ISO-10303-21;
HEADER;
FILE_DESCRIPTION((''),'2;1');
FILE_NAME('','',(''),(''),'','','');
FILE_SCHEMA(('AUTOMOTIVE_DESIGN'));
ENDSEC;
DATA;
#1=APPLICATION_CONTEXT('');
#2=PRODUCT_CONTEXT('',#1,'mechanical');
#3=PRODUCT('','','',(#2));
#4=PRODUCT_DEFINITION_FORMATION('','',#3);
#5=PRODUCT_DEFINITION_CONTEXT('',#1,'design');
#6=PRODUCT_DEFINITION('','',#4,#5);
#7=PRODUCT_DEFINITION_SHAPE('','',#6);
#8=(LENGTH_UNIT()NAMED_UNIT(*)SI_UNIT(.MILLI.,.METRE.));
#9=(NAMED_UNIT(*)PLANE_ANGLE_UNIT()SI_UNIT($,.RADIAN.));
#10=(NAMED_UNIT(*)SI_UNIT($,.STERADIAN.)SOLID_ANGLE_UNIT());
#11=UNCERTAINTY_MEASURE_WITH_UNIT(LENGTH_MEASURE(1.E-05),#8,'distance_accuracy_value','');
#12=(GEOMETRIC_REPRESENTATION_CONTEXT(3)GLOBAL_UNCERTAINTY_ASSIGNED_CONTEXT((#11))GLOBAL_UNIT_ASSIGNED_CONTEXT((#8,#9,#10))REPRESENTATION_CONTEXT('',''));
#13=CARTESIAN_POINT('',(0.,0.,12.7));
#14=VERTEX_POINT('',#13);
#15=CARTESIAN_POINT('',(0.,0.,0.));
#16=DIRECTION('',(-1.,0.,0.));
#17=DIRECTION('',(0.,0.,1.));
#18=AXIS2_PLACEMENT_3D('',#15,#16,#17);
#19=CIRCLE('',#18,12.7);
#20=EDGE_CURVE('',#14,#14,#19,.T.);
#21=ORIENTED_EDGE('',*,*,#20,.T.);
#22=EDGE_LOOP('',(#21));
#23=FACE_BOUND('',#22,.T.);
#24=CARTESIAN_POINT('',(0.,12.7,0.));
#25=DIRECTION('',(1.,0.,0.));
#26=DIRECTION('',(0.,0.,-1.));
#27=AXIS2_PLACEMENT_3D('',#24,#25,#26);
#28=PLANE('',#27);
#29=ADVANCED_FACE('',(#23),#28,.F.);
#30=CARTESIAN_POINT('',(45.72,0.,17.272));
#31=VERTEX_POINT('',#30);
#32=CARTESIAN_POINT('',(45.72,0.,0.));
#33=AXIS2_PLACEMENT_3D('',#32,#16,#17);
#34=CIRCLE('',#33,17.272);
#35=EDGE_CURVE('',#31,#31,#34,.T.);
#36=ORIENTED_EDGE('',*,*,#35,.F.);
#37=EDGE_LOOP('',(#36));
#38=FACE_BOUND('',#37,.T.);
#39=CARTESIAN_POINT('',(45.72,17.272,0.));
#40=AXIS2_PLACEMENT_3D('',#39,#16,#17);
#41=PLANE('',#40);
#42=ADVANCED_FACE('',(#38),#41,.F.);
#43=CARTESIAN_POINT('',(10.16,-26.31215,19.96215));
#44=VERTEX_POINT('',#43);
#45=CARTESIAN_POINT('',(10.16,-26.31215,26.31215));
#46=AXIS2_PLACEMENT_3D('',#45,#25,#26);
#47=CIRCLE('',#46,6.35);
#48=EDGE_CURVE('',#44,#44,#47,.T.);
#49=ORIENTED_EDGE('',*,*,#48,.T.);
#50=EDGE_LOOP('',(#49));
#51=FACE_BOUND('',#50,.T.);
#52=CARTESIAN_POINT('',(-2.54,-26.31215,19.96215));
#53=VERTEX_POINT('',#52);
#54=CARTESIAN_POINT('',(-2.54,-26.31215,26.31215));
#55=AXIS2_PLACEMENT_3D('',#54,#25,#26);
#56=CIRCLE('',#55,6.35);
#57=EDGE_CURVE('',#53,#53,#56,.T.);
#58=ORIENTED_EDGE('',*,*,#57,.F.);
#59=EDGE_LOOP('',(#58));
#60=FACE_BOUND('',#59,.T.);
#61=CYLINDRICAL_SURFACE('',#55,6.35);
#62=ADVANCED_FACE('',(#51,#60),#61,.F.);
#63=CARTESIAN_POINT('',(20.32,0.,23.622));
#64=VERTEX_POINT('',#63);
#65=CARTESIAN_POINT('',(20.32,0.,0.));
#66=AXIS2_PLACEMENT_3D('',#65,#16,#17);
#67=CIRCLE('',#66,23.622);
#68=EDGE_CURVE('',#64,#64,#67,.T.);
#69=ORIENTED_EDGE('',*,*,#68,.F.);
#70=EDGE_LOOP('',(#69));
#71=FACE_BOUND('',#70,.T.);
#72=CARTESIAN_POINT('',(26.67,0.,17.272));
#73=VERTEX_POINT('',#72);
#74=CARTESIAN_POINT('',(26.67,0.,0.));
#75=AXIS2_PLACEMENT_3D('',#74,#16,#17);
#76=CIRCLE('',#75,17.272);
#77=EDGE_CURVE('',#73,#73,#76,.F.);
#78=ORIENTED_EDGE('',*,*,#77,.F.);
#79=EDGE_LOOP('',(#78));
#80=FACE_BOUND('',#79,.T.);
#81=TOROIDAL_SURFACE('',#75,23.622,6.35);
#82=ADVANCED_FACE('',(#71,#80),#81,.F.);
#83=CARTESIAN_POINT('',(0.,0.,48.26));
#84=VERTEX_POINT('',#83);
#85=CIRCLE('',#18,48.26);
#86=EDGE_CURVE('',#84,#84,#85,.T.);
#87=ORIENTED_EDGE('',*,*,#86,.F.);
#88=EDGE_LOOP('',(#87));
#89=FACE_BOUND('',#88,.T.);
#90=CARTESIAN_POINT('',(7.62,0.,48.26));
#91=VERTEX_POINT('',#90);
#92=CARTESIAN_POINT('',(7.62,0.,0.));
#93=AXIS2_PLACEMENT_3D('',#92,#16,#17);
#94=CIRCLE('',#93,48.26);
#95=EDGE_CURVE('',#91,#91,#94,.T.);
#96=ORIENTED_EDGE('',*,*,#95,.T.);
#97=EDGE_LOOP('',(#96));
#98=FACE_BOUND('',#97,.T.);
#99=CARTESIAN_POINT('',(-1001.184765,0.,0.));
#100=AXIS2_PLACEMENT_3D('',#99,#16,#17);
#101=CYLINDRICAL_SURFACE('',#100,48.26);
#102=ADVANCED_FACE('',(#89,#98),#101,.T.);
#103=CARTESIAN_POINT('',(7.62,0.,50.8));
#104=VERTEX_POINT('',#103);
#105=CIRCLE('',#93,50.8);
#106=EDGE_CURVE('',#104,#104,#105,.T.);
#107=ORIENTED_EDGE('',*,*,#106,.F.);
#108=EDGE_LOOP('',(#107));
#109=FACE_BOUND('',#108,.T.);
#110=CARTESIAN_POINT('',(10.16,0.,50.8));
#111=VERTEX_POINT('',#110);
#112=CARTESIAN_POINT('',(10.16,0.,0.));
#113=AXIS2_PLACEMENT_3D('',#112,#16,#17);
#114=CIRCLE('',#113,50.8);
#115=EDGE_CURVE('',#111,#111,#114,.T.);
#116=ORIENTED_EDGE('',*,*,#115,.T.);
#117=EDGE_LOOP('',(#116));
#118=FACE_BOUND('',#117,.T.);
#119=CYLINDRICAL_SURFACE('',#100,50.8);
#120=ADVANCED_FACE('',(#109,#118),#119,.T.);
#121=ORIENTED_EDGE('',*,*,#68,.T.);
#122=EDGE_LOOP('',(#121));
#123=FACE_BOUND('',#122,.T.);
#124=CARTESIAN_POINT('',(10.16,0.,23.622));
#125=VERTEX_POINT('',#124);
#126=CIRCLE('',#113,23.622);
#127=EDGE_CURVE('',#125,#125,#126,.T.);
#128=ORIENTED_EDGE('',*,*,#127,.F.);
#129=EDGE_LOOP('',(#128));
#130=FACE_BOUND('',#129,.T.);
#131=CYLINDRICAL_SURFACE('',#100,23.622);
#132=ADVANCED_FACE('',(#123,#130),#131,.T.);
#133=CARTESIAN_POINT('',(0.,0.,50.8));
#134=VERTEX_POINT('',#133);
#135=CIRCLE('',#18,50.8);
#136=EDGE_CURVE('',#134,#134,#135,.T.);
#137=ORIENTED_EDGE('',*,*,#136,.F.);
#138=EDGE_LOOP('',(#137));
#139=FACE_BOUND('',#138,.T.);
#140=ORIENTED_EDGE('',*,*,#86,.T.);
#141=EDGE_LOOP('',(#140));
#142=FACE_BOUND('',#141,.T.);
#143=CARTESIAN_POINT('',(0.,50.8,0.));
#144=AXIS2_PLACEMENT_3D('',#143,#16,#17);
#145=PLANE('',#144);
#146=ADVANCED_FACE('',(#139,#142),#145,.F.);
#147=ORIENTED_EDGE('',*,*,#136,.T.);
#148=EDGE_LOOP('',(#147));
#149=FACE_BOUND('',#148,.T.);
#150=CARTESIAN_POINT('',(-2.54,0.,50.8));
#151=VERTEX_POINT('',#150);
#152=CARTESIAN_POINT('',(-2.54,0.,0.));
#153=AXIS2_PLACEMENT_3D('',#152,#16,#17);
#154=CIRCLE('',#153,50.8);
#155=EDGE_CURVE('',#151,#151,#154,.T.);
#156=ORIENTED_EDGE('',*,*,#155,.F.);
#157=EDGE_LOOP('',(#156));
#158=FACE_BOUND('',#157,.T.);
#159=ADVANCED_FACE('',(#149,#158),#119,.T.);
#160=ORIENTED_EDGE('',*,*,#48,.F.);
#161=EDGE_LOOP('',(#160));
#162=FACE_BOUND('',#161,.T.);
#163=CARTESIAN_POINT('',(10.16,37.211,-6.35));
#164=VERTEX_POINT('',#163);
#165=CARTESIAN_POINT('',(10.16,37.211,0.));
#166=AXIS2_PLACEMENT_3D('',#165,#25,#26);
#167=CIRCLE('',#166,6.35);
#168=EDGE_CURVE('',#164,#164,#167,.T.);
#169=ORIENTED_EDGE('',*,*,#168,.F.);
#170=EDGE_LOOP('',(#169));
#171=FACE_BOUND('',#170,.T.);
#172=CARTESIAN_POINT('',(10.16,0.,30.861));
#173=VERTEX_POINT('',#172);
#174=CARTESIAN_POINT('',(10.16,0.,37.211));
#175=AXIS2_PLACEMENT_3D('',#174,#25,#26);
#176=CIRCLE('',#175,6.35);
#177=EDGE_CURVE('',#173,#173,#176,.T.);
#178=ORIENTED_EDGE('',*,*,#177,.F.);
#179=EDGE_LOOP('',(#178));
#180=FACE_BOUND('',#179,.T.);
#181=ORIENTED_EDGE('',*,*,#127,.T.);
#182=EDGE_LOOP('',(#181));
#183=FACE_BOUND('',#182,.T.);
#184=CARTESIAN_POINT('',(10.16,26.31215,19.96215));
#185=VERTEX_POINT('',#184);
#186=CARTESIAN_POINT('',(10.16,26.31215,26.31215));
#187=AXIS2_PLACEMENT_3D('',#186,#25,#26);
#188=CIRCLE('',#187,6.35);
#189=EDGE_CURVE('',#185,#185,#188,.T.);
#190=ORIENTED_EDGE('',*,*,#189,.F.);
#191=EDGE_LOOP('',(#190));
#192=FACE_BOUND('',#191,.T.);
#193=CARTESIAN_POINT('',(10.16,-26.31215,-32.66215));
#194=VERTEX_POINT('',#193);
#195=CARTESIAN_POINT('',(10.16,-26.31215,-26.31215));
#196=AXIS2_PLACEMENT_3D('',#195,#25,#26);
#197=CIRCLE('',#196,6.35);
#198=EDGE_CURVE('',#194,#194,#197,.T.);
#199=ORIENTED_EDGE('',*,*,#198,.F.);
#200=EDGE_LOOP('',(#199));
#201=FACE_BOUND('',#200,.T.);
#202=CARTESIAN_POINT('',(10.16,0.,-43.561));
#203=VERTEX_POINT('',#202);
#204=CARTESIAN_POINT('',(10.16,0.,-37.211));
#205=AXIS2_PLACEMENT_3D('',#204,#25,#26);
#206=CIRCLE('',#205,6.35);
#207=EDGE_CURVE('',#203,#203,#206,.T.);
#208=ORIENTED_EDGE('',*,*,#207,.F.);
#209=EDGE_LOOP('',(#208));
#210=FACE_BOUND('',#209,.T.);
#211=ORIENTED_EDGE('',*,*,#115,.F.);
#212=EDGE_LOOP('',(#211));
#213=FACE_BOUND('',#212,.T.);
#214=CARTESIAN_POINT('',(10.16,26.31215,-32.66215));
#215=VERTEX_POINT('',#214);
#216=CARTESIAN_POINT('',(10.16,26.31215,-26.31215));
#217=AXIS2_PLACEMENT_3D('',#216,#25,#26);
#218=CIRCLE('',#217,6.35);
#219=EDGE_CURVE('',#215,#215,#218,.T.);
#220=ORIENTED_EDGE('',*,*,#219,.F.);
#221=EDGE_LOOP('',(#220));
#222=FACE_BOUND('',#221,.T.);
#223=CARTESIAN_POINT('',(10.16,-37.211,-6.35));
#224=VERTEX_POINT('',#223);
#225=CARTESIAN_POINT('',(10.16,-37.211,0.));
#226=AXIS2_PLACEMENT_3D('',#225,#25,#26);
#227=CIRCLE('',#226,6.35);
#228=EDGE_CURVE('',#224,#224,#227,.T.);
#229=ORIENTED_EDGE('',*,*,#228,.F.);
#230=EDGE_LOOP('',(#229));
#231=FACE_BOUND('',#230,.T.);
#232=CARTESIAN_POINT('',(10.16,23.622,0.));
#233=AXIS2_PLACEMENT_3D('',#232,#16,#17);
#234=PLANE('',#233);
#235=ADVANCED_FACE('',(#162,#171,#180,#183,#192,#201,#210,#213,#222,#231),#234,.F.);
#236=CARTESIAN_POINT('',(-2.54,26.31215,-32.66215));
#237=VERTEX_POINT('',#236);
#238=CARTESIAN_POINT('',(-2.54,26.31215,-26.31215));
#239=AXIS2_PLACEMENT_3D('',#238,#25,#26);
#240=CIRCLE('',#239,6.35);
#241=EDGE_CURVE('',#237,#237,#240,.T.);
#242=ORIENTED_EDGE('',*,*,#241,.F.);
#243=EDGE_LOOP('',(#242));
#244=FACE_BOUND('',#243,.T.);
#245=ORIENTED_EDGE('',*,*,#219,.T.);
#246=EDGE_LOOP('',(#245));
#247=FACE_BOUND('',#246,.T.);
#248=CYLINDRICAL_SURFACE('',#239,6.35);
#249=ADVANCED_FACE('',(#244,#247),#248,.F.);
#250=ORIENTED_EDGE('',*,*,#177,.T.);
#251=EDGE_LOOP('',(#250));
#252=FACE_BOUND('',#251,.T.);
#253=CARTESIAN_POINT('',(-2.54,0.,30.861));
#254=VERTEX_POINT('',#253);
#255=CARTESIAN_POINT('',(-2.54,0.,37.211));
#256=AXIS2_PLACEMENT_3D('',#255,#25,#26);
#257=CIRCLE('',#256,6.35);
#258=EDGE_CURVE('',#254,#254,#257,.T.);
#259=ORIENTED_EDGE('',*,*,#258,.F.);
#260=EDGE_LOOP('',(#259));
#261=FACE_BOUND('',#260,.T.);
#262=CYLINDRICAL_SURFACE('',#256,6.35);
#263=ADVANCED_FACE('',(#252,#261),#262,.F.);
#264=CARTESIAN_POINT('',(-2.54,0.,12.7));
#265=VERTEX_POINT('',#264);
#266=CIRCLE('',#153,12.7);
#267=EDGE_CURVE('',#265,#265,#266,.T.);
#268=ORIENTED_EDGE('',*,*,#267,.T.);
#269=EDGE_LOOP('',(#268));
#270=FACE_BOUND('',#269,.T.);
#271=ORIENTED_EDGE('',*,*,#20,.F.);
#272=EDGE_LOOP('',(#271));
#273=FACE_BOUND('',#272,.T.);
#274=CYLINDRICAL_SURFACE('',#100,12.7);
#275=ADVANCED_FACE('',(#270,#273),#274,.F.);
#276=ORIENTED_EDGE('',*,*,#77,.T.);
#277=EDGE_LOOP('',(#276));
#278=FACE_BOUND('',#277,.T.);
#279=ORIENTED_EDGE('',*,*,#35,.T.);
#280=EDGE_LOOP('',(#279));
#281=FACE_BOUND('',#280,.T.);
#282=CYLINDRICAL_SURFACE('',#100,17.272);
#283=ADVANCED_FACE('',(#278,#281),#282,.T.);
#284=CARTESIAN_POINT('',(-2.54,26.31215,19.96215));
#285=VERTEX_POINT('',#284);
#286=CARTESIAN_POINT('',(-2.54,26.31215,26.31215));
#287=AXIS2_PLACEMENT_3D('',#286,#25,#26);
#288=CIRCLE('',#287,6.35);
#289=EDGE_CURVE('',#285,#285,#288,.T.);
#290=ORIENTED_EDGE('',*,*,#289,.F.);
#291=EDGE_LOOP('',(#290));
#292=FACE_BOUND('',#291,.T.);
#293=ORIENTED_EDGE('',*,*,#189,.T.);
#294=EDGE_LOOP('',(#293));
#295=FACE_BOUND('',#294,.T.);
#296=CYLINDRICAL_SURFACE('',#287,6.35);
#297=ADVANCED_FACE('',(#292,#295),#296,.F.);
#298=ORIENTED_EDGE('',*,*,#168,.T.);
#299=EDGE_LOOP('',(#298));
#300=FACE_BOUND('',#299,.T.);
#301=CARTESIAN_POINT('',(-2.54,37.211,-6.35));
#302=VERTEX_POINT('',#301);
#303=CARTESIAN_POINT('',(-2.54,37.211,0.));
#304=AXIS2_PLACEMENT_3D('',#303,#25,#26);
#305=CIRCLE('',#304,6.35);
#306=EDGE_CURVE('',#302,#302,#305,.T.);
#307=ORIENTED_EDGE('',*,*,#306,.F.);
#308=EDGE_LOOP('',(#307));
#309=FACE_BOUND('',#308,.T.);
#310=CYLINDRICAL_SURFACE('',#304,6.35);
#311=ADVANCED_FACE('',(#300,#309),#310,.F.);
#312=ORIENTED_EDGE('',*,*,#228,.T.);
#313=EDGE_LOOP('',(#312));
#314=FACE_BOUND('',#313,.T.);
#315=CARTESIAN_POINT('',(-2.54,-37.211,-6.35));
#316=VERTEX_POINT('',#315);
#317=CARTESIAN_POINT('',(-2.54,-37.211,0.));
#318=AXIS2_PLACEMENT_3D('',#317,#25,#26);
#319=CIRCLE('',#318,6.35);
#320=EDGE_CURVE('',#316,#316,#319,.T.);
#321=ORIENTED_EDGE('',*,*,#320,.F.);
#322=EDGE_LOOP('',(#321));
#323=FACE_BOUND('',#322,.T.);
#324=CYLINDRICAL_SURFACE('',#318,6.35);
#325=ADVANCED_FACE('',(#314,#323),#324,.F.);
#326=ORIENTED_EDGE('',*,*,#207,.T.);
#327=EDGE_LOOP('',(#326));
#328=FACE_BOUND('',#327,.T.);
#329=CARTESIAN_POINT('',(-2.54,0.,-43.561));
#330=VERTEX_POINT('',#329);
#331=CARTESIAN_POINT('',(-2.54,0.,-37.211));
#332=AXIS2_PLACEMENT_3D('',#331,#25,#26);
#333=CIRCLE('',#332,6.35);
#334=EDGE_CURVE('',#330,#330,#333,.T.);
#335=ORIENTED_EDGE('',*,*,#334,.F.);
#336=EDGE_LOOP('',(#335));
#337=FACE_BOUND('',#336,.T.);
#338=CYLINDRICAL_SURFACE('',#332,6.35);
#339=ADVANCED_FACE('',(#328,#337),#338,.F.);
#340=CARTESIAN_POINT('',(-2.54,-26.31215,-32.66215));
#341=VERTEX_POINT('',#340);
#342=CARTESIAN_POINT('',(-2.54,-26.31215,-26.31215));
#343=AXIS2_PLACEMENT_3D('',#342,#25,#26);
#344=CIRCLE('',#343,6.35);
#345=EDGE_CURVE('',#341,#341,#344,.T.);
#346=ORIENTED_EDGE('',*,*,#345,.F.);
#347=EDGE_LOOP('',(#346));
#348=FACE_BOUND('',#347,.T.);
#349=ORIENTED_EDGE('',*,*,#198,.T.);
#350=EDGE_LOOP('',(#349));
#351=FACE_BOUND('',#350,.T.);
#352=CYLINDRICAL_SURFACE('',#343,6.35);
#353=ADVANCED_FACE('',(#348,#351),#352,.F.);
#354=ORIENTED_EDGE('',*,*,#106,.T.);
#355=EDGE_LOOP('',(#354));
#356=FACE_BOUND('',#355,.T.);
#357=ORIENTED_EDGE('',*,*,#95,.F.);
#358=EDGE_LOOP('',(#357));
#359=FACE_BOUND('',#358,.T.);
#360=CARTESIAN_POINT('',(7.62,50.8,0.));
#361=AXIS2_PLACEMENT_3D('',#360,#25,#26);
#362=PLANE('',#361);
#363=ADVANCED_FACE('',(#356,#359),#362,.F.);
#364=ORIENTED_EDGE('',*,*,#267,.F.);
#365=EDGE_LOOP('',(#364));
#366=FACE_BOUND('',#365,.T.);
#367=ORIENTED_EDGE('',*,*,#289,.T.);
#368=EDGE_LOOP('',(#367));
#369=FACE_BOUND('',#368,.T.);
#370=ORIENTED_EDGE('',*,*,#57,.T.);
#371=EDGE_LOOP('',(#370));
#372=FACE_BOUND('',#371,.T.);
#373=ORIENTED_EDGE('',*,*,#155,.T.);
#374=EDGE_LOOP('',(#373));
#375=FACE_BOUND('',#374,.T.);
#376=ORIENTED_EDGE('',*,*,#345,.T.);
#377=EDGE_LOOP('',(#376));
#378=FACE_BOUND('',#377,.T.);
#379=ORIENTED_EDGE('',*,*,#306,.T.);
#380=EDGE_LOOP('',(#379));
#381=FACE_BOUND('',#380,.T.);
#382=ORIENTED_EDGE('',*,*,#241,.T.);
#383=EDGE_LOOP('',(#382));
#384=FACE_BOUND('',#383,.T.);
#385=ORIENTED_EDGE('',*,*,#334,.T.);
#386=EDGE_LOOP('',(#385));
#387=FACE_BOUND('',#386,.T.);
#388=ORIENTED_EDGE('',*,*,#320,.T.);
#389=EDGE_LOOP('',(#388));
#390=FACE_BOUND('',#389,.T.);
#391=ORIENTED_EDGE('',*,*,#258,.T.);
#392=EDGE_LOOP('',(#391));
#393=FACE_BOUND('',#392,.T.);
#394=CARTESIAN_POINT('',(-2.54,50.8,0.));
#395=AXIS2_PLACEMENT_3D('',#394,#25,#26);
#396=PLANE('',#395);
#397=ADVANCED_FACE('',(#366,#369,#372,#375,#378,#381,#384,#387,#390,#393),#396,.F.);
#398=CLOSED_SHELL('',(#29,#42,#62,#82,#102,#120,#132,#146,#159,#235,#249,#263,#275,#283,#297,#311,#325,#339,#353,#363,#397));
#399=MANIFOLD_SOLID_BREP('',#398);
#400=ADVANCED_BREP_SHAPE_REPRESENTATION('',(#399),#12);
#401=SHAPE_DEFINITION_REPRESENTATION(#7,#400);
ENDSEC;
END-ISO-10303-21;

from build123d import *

# Parameters (mm, degrees)
SKETCH3_R          = 6.35
CUT_EXTRUDE1_DEPTH = 81.161047897
FILLET1_R          = 6.35


with BuildPart() as part:
    # Sketch2 → Revolve1 (revolve)
    with BuildSketch(Plane.XY, mode=Mode.PRIVATE) as revolve1_sk:
        Polygon((45.72, 17.272), (20.32, 17.272), (20.32, 23.622), (10.16, 23.622), (10.16, 50.8), (7.62, 50.8), (7.62, 48.26), (0, 48.26), (0, 50.8), (-2.54, 50.8), (-2.54, 12.7), (0, 12.7), (0, 0), (45.72, 0), align=None)
    revolve(revolve1_sk.sketch.rotate(Axis((-1001.184765233, 0, 0), (1, 0, 0)), 90), axis=Axis((-1001.184765233, 0, 0), (1, 0, 0)))

    # Sketch3 → Cut-Extrude1 (cut, through all)
    with BuildSketch(Plane(origin=(10.16, 0, 0), x_dir=(0, 0, -1), z_dir=(1, 0, 0))):
        with Locations((26.312150435, 26.312150435)):
            Circle(SKETCH3_R)
        with Locations((0, 37.211)):
            Circle(SKETCH3_R)
        with Locations((37.211, 0)):
            Circle(SKETCH3_R)
        with Locations((26.312150435, -26.312150435)):
            Circle(SKETCH3_R)
        with Locations((0, -37.211)):
            Circle(SKETCH3_R)
        with Locations((-26.312150435, -26.312150435)):
            Circle(SKETCH3_R)
        with Locations((-37.211, 0)):
            Circle(SKETCH3_R)
        with Locations((-26.312150435, 26.312150435)):
            Circle(SKETCH3_R)
    extrude(amount=-CUT_EXTRUDE1_DEPTH, mode=Mode.SUBTRACT)

    # Fillet1
    fillet1_edges = [part.edges().sort_by_distance(p)[0] for p in [
        (20.32, 0, -17.272),
    ]]
    fillet(fillet1_edges, radius=FILLET1_R - 0.0001)  # a hair under: the kernel refuses the full size


solid = part.part
